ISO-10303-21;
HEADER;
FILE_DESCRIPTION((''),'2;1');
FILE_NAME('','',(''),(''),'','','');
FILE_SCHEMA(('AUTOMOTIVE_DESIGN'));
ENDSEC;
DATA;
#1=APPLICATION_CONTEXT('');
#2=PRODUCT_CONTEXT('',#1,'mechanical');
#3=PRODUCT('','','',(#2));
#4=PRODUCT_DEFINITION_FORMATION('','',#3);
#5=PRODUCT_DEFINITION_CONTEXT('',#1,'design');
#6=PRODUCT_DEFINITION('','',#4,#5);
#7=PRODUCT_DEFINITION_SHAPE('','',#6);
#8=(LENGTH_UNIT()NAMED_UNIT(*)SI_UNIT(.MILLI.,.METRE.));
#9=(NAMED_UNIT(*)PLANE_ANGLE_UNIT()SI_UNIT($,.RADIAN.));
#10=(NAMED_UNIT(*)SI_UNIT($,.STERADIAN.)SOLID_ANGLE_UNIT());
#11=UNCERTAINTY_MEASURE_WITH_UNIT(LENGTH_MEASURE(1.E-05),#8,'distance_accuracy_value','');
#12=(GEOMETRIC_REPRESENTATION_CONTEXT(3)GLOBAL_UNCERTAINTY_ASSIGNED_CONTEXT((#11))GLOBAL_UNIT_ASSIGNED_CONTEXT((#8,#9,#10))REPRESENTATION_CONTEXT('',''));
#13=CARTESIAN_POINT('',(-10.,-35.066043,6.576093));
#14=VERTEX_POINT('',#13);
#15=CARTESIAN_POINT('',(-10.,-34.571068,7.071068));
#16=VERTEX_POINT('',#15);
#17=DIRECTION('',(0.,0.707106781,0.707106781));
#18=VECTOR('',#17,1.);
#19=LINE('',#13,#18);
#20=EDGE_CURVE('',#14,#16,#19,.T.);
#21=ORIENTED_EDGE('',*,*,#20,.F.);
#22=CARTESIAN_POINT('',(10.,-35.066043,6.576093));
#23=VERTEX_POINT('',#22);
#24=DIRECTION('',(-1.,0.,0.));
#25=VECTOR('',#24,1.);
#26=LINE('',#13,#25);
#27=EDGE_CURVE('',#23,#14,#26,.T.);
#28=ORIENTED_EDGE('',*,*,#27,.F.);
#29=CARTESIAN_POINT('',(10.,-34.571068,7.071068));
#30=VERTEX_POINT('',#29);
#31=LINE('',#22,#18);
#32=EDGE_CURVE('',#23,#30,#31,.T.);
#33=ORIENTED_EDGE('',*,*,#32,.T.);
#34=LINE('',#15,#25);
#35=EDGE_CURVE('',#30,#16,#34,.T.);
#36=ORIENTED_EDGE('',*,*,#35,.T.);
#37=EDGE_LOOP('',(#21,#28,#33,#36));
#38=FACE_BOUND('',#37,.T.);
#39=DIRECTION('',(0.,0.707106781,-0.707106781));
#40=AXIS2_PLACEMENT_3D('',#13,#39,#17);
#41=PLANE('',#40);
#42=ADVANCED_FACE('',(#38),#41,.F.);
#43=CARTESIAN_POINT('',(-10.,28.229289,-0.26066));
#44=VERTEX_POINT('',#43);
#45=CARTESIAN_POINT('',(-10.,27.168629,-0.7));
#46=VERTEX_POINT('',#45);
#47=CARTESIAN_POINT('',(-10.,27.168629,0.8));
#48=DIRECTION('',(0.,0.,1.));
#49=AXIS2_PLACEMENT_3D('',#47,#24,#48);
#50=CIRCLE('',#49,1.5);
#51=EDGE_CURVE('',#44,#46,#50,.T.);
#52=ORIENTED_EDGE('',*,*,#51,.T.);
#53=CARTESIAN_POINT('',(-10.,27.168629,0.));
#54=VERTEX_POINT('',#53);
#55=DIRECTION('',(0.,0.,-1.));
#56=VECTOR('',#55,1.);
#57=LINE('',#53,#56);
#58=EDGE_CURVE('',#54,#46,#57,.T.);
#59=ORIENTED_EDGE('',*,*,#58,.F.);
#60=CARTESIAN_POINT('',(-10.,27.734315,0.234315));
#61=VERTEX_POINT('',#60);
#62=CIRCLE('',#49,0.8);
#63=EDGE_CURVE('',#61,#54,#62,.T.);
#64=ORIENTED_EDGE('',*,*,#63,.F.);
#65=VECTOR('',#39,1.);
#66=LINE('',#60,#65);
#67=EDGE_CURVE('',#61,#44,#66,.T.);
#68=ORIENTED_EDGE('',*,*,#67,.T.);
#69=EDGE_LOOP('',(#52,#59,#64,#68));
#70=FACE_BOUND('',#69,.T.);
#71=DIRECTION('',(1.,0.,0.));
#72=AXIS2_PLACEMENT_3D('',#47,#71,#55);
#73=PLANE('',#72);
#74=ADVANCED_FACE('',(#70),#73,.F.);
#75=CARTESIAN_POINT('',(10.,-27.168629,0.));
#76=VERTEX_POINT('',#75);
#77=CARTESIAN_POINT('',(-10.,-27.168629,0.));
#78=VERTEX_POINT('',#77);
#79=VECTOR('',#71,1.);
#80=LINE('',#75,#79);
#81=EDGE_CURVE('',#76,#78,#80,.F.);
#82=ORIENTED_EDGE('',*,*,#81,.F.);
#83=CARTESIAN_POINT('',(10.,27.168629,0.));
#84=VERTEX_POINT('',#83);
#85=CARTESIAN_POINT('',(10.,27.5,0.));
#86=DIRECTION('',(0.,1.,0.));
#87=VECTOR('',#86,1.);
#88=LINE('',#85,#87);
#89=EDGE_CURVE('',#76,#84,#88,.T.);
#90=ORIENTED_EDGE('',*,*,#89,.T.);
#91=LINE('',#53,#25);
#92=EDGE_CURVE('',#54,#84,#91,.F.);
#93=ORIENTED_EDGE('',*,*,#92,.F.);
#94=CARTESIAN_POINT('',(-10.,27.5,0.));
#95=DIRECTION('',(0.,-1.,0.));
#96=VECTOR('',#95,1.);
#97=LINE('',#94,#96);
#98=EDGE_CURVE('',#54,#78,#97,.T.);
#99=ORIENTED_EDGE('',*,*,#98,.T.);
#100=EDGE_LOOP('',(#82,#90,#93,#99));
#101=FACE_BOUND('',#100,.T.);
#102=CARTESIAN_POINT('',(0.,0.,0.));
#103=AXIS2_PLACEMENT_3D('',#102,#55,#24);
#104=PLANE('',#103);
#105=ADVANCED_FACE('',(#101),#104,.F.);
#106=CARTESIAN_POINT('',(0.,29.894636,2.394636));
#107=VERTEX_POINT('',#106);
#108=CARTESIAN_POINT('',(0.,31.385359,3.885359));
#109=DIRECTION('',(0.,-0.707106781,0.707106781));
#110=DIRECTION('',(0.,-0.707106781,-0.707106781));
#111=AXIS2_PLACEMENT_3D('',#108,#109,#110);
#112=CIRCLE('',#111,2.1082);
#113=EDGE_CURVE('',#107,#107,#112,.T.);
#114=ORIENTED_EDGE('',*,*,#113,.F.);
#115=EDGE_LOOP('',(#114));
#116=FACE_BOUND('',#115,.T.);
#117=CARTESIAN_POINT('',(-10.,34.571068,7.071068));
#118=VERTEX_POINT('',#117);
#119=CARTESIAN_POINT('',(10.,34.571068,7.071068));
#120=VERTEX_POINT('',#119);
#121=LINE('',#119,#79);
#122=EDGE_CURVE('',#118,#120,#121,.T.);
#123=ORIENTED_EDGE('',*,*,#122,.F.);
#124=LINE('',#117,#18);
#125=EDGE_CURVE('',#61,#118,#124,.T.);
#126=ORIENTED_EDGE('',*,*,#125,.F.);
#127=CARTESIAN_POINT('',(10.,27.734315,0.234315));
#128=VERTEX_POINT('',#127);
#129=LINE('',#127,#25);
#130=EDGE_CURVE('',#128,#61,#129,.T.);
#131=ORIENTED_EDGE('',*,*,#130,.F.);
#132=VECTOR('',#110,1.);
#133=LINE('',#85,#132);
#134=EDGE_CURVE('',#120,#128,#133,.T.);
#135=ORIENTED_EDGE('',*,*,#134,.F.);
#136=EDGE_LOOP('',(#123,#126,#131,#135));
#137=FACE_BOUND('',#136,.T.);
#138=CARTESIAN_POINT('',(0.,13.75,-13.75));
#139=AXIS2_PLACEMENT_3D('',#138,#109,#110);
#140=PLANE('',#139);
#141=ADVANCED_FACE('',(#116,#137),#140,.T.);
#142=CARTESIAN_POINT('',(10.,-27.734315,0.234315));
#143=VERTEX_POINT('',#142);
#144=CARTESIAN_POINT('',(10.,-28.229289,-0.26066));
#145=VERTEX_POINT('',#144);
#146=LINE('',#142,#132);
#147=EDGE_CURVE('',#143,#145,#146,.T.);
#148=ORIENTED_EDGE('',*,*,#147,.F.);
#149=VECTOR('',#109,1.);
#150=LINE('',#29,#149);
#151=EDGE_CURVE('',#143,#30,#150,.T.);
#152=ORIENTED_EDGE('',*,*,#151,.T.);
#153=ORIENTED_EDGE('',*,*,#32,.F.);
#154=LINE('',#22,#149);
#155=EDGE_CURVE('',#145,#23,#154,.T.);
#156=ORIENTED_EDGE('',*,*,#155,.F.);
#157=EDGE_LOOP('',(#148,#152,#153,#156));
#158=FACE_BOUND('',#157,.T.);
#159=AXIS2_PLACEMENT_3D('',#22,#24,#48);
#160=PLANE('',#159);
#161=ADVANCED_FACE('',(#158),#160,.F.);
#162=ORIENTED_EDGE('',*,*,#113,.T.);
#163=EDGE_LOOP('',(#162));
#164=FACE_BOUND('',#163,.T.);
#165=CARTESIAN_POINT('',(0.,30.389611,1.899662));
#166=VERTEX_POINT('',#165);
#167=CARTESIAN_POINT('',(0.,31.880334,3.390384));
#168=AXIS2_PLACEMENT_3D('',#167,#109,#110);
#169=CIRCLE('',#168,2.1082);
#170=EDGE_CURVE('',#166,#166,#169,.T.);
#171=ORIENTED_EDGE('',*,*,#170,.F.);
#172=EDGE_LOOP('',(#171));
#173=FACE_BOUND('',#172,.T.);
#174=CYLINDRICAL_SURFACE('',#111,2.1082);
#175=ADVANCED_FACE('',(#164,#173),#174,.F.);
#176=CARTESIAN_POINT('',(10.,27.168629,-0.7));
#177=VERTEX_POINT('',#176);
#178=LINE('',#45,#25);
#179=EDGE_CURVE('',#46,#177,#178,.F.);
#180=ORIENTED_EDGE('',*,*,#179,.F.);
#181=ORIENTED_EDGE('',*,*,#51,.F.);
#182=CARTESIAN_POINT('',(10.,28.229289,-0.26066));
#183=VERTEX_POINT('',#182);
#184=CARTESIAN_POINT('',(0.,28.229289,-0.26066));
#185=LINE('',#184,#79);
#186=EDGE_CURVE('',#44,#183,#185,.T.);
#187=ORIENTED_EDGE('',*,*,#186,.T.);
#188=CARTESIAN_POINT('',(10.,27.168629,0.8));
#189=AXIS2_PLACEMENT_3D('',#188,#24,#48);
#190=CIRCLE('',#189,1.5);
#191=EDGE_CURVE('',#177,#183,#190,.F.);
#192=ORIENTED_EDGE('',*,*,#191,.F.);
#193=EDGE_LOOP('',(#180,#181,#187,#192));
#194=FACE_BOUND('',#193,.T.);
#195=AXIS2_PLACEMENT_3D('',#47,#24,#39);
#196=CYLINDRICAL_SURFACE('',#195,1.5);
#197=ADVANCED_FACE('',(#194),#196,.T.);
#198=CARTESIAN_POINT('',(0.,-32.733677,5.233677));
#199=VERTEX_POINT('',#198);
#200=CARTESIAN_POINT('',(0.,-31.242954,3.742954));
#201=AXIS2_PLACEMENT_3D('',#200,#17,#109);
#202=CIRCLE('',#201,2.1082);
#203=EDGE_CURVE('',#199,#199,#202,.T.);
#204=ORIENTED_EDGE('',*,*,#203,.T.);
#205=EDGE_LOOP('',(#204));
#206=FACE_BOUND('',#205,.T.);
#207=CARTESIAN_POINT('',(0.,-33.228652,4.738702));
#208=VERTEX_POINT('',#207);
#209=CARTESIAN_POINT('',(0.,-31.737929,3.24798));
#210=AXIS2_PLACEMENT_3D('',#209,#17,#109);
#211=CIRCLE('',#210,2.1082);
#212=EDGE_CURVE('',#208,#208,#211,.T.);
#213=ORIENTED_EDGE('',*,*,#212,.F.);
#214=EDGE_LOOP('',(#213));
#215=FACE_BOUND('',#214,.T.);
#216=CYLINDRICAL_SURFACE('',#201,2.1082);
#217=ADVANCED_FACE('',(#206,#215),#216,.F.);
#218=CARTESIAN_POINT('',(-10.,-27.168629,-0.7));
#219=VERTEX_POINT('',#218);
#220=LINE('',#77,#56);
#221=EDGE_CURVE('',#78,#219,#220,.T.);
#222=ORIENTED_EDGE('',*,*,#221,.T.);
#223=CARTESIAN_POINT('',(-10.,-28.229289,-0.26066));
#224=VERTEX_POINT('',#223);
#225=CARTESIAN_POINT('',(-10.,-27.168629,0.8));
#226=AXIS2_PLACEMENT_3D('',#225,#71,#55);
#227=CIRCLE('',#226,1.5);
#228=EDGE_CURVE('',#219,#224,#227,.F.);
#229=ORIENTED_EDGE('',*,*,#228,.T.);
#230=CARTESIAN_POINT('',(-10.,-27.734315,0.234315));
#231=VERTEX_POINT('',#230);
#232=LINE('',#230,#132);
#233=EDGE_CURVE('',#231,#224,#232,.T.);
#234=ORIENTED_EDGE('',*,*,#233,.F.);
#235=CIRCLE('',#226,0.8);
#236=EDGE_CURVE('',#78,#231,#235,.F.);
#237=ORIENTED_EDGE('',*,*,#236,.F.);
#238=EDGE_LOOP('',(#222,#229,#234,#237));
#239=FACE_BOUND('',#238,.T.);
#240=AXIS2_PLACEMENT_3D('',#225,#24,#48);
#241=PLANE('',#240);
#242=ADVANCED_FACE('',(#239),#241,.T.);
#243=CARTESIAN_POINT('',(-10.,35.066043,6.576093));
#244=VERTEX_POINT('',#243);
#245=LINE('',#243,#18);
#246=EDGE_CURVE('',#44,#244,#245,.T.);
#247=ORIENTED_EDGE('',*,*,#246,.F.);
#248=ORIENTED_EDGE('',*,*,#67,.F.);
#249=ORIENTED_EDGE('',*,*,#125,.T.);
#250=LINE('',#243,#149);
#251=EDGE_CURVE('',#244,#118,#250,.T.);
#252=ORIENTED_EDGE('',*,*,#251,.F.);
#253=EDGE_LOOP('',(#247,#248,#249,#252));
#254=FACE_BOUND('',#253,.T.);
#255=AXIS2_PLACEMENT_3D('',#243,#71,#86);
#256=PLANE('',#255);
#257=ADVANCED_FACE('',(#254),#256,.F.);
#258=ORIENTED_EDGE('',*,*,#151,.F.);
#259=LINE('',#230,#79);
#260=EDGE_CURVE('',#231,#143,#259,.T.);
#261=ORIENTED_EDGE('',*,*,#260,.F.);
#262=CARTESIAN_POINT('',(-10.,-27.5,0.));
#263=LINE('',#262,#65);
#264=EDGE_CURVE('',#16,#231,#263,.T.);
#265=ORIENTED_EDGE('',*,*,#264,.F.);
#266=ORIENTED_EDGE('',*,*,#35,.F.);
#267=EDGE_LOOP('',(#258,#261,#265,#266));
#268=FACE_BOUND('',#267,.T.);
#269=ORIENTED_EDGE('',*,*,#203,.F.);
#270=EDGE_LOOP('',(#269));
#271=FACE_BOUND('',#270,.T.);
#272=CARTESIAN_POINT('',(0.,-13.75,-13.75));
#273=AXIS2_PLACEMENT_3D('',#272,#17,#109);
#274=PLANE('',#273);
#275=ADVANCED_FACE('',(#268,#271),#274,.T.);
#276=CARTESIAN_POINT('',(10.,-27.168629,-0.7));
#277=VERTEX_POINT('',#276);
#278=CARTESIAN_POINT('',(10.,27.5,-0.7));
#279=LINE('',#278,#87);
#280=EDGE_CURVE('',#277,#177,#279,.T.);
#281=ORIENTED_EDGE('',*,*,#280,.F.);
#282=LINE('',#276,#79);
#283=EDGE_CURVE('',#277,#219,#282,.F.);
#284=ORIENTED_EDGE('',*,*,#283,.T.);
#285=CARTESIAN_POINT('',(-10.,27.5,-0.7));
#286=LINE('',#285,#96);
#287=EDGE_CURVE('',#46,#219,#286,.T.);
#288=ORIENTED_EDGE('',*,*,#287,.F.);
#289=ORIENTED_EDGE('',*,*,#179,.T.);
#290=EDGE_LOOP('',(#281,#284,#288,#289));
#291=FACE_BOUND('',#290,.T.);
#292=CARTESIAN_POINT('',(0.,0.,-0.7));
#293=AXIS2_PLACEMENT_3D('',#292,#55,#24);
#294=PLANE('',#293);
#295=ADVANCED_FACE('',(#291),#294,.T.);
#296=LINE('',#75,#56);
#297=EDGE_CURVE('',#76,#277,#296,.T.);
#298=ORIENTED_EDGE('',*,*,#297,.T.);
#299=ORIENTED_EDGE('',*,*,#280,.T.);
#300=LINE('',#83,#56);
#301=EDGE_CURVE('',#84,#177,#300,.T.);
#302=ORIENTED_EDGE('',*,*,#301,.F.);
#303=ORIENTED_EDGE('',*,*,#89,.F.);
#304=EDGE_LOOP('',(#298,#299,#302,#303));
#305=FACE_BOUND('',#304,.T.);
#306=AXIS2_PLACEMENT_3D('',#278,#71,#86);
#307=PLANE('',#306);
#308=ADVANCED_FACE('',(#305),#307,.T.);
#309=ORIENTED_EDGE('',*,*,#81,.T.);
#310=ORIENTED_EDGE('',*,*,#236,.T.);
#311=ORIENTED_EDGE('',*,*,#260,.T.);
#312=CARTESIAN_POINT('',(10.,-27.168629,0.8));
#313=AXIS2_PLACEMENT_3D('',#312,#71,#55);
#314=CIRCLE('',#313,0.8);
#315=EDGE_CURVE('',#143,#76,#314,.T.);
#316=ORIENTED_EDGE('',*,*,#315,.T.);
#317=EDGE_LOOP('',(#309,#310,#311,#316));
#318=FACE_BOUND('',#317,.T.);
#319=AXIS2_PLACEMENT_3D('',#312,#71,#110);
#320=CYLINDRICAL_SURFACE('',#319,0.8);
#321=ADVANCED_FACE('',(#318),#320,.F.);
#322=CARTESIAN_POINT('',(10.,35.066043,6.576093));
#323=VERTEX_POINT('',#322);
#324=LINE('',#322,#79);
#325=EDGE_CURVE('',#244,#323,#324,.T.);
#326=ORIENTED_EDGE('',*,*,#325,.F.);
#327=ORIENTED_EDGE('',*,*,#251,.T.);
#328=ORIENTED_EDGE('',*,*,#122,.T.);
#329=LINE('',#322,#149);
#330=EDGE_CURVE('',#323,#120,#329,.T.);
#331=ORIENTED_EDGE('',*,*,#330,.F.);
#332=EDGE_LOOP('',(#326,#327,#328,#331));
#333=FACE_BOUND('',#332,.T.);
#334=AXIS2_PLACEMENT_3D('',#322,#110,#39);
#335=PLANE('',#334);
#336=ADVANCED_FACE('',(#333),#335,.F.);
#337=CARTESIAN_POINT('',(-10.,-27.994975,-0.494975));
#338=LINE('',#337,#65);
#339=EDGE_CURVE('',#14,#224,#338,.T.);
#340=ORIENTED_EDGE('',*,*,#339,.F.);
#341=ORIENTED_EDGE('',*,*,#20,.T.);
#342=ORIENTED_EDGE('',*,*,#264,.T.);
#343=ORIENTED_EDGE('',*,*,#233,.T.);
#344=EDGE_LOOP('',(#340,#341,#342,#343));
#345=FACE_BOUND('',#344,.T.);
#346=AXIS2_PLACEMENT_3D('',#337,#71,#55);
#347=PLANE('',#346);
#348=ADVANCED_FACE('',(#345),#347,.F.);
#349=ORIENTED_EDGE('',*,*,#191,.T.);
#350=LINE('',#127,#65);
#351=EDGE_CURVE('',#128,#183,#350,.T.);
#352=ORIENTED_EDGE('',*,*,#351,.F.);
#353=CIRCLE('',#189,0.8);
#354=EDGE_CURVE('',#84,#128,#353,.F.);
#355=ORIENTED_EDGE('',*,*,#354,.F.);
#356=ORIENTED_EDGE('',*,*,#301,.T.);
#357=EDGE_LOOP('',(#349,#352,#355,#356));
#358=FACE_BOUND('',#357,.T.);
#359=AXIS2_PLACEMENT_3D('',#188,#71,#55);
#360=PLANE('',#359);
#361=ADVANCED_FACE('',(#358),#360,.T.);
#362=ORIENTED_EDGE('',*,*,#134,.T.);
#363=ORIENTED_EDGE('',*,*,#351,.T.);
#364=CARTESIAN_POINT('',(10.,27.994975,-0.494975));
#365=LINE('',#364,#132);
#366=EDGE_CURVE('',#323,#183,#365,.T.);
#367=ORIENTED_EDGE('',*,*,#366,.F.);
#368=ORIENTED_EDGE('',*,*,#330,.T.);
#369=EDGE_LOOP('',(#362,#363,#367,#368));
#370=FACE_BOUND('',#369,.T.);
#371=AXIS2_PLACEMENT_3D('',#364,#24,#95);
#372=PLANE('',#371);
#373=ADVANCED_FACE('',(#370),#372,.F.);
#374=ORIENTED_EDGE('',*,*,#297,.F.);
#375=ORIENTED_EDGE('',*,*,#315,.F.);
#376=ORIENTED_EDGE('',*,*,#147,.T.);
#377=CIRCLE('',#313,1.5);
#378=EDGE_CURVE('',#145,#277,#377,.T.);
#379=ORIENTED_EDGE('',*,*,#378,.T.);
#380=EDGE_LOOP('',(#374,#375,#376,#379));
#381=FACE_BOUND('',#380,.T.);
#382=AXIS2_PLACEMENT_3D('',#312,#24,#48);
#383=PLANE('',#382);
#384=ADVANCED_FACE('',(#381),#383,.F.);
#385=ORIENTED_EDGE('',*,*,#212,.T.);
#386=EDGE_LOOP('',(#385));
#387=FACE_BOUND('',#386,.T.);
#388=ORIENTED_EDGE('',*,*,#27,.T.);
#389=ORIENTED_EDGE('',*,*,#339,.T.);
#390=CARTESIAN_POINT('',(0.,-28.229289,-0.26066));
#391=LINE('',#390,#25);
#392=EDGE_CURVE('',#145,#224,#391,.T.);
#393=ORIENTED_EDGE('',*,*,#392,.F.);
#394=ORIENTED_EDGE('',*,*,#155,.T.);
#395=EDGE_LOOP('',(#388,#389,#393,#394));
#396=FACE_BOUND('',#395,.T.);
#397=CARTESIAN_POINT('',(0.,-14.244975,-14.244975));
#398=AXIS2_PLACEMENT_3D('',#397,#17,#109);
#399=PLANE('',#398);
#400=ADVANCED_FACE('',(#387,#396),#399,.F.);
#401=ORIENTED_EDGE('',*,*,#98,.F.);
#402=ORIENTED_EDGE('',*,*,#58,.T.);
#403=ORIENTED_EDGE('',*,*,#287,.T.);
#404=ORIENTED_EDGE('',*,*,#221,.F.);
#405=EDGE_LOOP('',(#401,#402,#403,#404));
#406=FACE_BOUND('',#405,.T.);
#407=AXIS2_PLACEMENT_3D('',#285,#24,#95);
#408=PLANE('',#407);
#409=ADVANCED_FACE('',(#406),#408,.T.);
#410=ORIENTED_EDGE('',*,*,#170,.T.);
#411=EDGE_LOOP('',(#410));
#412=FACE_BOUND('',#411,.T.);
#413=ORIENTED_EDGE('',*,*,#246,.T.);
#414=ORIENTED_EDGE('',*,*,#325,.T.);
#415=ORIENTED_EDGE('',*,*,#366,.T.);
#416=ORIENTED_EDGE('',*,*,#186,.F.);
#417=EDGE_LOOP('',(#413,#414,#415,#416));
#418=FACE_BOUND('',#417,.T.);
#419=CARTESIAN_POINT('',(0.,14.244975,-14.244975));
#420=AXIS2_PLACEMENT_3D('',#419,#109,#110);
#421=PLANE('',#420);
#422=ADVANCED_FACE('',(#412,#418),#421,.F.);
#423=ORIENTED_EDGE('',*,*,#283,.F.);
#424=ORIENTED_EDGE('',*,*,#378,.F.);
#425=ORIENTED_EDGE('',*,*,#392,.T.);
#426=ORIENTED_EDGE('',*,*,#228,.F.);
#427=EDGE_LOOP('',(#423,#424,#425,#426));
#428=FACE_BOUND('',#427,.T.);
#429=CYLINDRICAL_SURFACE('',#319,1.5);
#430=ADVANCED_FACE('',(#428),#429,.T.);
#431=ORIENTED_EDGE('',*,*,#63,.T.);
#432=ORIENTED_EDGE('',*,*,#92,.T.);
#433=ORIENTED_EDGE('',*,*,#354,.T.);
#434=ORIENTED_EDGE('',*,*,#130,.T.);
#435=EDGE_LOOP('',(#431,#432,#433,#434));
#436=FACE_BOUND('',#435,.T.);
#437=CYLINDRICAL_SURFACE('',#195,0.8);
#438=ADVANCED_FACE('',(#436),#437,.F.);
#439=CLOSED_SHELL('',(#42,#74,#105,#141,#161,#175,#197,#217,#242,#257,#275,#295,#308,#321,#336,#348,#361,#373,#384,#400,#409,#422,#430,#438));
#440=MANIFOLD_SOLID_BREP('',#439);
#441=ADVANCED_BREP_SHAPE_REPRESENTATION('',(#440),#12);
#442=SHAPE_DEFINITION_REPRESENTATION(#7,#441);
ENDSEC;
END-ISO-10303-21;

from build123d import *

# Parameters (mm, degrees)
SKETCH1_W                    = 20
SKETCH1_H                    = 55
BASE_FLANGE1_DEPTH           = 0.7
EDGE_FLANGE1_STRIP_CUT_DEPTH = 20
EDGE_FLANGE1_DEPTH           = 20
EDGE_FLANGE2_STRIP_CUT_DEPTH = 20
EDGE_FLANGE2_DEPTH           = 20
F_19_0_166_DIAMETER_SLOT1_D  = 4.2164
F_19_0_166_DIAMETER_SLOT2_D  = 4.2164


# Sheet-metal steps are written as plain solids
with BuildPart() as part:
    # Sketch1 → Base-Flange1 (new body)
    with BuildSketch(Plane.XY):
        Rectangle(SKETCH1_W, SKETCH1_H)
    extrude(amount=-BASE_FLANGE1_DEPTH)

    # Edge-Flange1 strip (across the edge) → Edge-Flange1 strip cut (cut)
    with BuildSketch(Plane(origin=(-10, -27.5, 0), x_dir=(0, 0.7071067811865438, 0.7071067811865512), z_dir=(1, 0, 0))):
        Polygon((-3.371930009, 2.381980515), (-0.260660172, -0.729289322), (0.234314575, -0.234314575), (-2.876955262, 2.876955262), align=None)
    extrude(amount=EDGE_FLANGE1_STRIP_CUT_DEPTH, mode=Mode.SUBTRACT)

    # Edge-Flange1 section (across the edge) → Edge-Flange1 (add)
    with BuildSketch(Plane(origin=(-10, -27.5, 0), x_dir=(0, 0.7071067811865438, 0.7071067811865512), z_dir=(1, 0, 0))):
        with BuildLine():
            Line((-0.7, 0.33137085), (-0.7, 10))
            Line((-0.7, 10), (0, 10))
            Line((0, 10), (0, 0.33137085))
            ThreePointArc((0, 0.33137085), (0.060896374, 0.025224104), (0.234314575, -0.234314575))
            Line((0.234314575, -0.234314575), (-0.260660172, -0.729289322))
            ThreePointArc((-0.260660172, -0.729289322), (-0.585819299, -0.242654299), (-0.7, 0.33137085))
        make_face()
    extrude(amount=EDGE_FLANGE1_DEPTH)

    # Edge-Flange2 strip (across the edge) → Edge-Flange2 strip cut (cut)
    with BuildSketch(Plane(origin=(10, 27.5, 0), x_dir=(0, -0.7071067811865438, 0.7071067811865512), z_dir=(-1, 0, 0))):
        Polygon((-3.371930009, 2.381980515), (-0.260660172, -0.729289322), (0.234314575, -0.234314575), (-2.876955262, 2.876955262), align=None)
    extrude(amount=EDGE_FLANGE2_STRIP_CUT_DEPTH, mode=Mode.SUBTRACT)

    # Edge-Flange2 section (across the edge) → Edge-Flange2 (add)
    with BuildSketch(Plane(origin=(10, 27.5, 0), x_dir=(0, -0.7071067811865438, 0.7071067811865512), z_dir=(-1, 0, 0))):
        with BuildLine():
            Line((-0.7, 0.33137085), (-0.7, 10))
            Line((-0.7, 10), (0, 10))
            Line((0, 10), (0, 0.33137085))
            ThreePointArc((0, 0.33137085), (0.060896374, 0.025224104), (0.234314575, -0.234314575))
            Line((0.234314575, -0.234314575), (-0.260660172, -0.729289322))
            ThreePointArc((-0.260660172, -0.729289322), (-0.585819299, -0.242654299), (-0.7, 0.33137085))
        make_face()
    extrude(amount=EDGE_FLANGE2_DEPTH)

    # #19 (0.166) Diameter Slot1 (through all)
    with Locations(Plane(origin=(0, -13.75, -13.75), x_dir=(1, 0, 0), z_dir=(0, 0.7071067811865438, 0.7071067811865513))):
        with Locations((0, -24.738773453)):
            Hole(F_19_0_166_DIAMETER_SLOT1_D / 2)

    # #19 (0.166) Diameter Slot2 (through all)
    with Locations(Plane(origin=(0, 13.75, -13.75), x_dir=(1, 0, 0), z_dir=(0, -0.7071067811865441, 0.7071067811865509))):
        with Locations((0, 24.940163898)):
            Hole(F_19_0_166_DIAMETER_SLOT2_D / 2)


solid = part.part
